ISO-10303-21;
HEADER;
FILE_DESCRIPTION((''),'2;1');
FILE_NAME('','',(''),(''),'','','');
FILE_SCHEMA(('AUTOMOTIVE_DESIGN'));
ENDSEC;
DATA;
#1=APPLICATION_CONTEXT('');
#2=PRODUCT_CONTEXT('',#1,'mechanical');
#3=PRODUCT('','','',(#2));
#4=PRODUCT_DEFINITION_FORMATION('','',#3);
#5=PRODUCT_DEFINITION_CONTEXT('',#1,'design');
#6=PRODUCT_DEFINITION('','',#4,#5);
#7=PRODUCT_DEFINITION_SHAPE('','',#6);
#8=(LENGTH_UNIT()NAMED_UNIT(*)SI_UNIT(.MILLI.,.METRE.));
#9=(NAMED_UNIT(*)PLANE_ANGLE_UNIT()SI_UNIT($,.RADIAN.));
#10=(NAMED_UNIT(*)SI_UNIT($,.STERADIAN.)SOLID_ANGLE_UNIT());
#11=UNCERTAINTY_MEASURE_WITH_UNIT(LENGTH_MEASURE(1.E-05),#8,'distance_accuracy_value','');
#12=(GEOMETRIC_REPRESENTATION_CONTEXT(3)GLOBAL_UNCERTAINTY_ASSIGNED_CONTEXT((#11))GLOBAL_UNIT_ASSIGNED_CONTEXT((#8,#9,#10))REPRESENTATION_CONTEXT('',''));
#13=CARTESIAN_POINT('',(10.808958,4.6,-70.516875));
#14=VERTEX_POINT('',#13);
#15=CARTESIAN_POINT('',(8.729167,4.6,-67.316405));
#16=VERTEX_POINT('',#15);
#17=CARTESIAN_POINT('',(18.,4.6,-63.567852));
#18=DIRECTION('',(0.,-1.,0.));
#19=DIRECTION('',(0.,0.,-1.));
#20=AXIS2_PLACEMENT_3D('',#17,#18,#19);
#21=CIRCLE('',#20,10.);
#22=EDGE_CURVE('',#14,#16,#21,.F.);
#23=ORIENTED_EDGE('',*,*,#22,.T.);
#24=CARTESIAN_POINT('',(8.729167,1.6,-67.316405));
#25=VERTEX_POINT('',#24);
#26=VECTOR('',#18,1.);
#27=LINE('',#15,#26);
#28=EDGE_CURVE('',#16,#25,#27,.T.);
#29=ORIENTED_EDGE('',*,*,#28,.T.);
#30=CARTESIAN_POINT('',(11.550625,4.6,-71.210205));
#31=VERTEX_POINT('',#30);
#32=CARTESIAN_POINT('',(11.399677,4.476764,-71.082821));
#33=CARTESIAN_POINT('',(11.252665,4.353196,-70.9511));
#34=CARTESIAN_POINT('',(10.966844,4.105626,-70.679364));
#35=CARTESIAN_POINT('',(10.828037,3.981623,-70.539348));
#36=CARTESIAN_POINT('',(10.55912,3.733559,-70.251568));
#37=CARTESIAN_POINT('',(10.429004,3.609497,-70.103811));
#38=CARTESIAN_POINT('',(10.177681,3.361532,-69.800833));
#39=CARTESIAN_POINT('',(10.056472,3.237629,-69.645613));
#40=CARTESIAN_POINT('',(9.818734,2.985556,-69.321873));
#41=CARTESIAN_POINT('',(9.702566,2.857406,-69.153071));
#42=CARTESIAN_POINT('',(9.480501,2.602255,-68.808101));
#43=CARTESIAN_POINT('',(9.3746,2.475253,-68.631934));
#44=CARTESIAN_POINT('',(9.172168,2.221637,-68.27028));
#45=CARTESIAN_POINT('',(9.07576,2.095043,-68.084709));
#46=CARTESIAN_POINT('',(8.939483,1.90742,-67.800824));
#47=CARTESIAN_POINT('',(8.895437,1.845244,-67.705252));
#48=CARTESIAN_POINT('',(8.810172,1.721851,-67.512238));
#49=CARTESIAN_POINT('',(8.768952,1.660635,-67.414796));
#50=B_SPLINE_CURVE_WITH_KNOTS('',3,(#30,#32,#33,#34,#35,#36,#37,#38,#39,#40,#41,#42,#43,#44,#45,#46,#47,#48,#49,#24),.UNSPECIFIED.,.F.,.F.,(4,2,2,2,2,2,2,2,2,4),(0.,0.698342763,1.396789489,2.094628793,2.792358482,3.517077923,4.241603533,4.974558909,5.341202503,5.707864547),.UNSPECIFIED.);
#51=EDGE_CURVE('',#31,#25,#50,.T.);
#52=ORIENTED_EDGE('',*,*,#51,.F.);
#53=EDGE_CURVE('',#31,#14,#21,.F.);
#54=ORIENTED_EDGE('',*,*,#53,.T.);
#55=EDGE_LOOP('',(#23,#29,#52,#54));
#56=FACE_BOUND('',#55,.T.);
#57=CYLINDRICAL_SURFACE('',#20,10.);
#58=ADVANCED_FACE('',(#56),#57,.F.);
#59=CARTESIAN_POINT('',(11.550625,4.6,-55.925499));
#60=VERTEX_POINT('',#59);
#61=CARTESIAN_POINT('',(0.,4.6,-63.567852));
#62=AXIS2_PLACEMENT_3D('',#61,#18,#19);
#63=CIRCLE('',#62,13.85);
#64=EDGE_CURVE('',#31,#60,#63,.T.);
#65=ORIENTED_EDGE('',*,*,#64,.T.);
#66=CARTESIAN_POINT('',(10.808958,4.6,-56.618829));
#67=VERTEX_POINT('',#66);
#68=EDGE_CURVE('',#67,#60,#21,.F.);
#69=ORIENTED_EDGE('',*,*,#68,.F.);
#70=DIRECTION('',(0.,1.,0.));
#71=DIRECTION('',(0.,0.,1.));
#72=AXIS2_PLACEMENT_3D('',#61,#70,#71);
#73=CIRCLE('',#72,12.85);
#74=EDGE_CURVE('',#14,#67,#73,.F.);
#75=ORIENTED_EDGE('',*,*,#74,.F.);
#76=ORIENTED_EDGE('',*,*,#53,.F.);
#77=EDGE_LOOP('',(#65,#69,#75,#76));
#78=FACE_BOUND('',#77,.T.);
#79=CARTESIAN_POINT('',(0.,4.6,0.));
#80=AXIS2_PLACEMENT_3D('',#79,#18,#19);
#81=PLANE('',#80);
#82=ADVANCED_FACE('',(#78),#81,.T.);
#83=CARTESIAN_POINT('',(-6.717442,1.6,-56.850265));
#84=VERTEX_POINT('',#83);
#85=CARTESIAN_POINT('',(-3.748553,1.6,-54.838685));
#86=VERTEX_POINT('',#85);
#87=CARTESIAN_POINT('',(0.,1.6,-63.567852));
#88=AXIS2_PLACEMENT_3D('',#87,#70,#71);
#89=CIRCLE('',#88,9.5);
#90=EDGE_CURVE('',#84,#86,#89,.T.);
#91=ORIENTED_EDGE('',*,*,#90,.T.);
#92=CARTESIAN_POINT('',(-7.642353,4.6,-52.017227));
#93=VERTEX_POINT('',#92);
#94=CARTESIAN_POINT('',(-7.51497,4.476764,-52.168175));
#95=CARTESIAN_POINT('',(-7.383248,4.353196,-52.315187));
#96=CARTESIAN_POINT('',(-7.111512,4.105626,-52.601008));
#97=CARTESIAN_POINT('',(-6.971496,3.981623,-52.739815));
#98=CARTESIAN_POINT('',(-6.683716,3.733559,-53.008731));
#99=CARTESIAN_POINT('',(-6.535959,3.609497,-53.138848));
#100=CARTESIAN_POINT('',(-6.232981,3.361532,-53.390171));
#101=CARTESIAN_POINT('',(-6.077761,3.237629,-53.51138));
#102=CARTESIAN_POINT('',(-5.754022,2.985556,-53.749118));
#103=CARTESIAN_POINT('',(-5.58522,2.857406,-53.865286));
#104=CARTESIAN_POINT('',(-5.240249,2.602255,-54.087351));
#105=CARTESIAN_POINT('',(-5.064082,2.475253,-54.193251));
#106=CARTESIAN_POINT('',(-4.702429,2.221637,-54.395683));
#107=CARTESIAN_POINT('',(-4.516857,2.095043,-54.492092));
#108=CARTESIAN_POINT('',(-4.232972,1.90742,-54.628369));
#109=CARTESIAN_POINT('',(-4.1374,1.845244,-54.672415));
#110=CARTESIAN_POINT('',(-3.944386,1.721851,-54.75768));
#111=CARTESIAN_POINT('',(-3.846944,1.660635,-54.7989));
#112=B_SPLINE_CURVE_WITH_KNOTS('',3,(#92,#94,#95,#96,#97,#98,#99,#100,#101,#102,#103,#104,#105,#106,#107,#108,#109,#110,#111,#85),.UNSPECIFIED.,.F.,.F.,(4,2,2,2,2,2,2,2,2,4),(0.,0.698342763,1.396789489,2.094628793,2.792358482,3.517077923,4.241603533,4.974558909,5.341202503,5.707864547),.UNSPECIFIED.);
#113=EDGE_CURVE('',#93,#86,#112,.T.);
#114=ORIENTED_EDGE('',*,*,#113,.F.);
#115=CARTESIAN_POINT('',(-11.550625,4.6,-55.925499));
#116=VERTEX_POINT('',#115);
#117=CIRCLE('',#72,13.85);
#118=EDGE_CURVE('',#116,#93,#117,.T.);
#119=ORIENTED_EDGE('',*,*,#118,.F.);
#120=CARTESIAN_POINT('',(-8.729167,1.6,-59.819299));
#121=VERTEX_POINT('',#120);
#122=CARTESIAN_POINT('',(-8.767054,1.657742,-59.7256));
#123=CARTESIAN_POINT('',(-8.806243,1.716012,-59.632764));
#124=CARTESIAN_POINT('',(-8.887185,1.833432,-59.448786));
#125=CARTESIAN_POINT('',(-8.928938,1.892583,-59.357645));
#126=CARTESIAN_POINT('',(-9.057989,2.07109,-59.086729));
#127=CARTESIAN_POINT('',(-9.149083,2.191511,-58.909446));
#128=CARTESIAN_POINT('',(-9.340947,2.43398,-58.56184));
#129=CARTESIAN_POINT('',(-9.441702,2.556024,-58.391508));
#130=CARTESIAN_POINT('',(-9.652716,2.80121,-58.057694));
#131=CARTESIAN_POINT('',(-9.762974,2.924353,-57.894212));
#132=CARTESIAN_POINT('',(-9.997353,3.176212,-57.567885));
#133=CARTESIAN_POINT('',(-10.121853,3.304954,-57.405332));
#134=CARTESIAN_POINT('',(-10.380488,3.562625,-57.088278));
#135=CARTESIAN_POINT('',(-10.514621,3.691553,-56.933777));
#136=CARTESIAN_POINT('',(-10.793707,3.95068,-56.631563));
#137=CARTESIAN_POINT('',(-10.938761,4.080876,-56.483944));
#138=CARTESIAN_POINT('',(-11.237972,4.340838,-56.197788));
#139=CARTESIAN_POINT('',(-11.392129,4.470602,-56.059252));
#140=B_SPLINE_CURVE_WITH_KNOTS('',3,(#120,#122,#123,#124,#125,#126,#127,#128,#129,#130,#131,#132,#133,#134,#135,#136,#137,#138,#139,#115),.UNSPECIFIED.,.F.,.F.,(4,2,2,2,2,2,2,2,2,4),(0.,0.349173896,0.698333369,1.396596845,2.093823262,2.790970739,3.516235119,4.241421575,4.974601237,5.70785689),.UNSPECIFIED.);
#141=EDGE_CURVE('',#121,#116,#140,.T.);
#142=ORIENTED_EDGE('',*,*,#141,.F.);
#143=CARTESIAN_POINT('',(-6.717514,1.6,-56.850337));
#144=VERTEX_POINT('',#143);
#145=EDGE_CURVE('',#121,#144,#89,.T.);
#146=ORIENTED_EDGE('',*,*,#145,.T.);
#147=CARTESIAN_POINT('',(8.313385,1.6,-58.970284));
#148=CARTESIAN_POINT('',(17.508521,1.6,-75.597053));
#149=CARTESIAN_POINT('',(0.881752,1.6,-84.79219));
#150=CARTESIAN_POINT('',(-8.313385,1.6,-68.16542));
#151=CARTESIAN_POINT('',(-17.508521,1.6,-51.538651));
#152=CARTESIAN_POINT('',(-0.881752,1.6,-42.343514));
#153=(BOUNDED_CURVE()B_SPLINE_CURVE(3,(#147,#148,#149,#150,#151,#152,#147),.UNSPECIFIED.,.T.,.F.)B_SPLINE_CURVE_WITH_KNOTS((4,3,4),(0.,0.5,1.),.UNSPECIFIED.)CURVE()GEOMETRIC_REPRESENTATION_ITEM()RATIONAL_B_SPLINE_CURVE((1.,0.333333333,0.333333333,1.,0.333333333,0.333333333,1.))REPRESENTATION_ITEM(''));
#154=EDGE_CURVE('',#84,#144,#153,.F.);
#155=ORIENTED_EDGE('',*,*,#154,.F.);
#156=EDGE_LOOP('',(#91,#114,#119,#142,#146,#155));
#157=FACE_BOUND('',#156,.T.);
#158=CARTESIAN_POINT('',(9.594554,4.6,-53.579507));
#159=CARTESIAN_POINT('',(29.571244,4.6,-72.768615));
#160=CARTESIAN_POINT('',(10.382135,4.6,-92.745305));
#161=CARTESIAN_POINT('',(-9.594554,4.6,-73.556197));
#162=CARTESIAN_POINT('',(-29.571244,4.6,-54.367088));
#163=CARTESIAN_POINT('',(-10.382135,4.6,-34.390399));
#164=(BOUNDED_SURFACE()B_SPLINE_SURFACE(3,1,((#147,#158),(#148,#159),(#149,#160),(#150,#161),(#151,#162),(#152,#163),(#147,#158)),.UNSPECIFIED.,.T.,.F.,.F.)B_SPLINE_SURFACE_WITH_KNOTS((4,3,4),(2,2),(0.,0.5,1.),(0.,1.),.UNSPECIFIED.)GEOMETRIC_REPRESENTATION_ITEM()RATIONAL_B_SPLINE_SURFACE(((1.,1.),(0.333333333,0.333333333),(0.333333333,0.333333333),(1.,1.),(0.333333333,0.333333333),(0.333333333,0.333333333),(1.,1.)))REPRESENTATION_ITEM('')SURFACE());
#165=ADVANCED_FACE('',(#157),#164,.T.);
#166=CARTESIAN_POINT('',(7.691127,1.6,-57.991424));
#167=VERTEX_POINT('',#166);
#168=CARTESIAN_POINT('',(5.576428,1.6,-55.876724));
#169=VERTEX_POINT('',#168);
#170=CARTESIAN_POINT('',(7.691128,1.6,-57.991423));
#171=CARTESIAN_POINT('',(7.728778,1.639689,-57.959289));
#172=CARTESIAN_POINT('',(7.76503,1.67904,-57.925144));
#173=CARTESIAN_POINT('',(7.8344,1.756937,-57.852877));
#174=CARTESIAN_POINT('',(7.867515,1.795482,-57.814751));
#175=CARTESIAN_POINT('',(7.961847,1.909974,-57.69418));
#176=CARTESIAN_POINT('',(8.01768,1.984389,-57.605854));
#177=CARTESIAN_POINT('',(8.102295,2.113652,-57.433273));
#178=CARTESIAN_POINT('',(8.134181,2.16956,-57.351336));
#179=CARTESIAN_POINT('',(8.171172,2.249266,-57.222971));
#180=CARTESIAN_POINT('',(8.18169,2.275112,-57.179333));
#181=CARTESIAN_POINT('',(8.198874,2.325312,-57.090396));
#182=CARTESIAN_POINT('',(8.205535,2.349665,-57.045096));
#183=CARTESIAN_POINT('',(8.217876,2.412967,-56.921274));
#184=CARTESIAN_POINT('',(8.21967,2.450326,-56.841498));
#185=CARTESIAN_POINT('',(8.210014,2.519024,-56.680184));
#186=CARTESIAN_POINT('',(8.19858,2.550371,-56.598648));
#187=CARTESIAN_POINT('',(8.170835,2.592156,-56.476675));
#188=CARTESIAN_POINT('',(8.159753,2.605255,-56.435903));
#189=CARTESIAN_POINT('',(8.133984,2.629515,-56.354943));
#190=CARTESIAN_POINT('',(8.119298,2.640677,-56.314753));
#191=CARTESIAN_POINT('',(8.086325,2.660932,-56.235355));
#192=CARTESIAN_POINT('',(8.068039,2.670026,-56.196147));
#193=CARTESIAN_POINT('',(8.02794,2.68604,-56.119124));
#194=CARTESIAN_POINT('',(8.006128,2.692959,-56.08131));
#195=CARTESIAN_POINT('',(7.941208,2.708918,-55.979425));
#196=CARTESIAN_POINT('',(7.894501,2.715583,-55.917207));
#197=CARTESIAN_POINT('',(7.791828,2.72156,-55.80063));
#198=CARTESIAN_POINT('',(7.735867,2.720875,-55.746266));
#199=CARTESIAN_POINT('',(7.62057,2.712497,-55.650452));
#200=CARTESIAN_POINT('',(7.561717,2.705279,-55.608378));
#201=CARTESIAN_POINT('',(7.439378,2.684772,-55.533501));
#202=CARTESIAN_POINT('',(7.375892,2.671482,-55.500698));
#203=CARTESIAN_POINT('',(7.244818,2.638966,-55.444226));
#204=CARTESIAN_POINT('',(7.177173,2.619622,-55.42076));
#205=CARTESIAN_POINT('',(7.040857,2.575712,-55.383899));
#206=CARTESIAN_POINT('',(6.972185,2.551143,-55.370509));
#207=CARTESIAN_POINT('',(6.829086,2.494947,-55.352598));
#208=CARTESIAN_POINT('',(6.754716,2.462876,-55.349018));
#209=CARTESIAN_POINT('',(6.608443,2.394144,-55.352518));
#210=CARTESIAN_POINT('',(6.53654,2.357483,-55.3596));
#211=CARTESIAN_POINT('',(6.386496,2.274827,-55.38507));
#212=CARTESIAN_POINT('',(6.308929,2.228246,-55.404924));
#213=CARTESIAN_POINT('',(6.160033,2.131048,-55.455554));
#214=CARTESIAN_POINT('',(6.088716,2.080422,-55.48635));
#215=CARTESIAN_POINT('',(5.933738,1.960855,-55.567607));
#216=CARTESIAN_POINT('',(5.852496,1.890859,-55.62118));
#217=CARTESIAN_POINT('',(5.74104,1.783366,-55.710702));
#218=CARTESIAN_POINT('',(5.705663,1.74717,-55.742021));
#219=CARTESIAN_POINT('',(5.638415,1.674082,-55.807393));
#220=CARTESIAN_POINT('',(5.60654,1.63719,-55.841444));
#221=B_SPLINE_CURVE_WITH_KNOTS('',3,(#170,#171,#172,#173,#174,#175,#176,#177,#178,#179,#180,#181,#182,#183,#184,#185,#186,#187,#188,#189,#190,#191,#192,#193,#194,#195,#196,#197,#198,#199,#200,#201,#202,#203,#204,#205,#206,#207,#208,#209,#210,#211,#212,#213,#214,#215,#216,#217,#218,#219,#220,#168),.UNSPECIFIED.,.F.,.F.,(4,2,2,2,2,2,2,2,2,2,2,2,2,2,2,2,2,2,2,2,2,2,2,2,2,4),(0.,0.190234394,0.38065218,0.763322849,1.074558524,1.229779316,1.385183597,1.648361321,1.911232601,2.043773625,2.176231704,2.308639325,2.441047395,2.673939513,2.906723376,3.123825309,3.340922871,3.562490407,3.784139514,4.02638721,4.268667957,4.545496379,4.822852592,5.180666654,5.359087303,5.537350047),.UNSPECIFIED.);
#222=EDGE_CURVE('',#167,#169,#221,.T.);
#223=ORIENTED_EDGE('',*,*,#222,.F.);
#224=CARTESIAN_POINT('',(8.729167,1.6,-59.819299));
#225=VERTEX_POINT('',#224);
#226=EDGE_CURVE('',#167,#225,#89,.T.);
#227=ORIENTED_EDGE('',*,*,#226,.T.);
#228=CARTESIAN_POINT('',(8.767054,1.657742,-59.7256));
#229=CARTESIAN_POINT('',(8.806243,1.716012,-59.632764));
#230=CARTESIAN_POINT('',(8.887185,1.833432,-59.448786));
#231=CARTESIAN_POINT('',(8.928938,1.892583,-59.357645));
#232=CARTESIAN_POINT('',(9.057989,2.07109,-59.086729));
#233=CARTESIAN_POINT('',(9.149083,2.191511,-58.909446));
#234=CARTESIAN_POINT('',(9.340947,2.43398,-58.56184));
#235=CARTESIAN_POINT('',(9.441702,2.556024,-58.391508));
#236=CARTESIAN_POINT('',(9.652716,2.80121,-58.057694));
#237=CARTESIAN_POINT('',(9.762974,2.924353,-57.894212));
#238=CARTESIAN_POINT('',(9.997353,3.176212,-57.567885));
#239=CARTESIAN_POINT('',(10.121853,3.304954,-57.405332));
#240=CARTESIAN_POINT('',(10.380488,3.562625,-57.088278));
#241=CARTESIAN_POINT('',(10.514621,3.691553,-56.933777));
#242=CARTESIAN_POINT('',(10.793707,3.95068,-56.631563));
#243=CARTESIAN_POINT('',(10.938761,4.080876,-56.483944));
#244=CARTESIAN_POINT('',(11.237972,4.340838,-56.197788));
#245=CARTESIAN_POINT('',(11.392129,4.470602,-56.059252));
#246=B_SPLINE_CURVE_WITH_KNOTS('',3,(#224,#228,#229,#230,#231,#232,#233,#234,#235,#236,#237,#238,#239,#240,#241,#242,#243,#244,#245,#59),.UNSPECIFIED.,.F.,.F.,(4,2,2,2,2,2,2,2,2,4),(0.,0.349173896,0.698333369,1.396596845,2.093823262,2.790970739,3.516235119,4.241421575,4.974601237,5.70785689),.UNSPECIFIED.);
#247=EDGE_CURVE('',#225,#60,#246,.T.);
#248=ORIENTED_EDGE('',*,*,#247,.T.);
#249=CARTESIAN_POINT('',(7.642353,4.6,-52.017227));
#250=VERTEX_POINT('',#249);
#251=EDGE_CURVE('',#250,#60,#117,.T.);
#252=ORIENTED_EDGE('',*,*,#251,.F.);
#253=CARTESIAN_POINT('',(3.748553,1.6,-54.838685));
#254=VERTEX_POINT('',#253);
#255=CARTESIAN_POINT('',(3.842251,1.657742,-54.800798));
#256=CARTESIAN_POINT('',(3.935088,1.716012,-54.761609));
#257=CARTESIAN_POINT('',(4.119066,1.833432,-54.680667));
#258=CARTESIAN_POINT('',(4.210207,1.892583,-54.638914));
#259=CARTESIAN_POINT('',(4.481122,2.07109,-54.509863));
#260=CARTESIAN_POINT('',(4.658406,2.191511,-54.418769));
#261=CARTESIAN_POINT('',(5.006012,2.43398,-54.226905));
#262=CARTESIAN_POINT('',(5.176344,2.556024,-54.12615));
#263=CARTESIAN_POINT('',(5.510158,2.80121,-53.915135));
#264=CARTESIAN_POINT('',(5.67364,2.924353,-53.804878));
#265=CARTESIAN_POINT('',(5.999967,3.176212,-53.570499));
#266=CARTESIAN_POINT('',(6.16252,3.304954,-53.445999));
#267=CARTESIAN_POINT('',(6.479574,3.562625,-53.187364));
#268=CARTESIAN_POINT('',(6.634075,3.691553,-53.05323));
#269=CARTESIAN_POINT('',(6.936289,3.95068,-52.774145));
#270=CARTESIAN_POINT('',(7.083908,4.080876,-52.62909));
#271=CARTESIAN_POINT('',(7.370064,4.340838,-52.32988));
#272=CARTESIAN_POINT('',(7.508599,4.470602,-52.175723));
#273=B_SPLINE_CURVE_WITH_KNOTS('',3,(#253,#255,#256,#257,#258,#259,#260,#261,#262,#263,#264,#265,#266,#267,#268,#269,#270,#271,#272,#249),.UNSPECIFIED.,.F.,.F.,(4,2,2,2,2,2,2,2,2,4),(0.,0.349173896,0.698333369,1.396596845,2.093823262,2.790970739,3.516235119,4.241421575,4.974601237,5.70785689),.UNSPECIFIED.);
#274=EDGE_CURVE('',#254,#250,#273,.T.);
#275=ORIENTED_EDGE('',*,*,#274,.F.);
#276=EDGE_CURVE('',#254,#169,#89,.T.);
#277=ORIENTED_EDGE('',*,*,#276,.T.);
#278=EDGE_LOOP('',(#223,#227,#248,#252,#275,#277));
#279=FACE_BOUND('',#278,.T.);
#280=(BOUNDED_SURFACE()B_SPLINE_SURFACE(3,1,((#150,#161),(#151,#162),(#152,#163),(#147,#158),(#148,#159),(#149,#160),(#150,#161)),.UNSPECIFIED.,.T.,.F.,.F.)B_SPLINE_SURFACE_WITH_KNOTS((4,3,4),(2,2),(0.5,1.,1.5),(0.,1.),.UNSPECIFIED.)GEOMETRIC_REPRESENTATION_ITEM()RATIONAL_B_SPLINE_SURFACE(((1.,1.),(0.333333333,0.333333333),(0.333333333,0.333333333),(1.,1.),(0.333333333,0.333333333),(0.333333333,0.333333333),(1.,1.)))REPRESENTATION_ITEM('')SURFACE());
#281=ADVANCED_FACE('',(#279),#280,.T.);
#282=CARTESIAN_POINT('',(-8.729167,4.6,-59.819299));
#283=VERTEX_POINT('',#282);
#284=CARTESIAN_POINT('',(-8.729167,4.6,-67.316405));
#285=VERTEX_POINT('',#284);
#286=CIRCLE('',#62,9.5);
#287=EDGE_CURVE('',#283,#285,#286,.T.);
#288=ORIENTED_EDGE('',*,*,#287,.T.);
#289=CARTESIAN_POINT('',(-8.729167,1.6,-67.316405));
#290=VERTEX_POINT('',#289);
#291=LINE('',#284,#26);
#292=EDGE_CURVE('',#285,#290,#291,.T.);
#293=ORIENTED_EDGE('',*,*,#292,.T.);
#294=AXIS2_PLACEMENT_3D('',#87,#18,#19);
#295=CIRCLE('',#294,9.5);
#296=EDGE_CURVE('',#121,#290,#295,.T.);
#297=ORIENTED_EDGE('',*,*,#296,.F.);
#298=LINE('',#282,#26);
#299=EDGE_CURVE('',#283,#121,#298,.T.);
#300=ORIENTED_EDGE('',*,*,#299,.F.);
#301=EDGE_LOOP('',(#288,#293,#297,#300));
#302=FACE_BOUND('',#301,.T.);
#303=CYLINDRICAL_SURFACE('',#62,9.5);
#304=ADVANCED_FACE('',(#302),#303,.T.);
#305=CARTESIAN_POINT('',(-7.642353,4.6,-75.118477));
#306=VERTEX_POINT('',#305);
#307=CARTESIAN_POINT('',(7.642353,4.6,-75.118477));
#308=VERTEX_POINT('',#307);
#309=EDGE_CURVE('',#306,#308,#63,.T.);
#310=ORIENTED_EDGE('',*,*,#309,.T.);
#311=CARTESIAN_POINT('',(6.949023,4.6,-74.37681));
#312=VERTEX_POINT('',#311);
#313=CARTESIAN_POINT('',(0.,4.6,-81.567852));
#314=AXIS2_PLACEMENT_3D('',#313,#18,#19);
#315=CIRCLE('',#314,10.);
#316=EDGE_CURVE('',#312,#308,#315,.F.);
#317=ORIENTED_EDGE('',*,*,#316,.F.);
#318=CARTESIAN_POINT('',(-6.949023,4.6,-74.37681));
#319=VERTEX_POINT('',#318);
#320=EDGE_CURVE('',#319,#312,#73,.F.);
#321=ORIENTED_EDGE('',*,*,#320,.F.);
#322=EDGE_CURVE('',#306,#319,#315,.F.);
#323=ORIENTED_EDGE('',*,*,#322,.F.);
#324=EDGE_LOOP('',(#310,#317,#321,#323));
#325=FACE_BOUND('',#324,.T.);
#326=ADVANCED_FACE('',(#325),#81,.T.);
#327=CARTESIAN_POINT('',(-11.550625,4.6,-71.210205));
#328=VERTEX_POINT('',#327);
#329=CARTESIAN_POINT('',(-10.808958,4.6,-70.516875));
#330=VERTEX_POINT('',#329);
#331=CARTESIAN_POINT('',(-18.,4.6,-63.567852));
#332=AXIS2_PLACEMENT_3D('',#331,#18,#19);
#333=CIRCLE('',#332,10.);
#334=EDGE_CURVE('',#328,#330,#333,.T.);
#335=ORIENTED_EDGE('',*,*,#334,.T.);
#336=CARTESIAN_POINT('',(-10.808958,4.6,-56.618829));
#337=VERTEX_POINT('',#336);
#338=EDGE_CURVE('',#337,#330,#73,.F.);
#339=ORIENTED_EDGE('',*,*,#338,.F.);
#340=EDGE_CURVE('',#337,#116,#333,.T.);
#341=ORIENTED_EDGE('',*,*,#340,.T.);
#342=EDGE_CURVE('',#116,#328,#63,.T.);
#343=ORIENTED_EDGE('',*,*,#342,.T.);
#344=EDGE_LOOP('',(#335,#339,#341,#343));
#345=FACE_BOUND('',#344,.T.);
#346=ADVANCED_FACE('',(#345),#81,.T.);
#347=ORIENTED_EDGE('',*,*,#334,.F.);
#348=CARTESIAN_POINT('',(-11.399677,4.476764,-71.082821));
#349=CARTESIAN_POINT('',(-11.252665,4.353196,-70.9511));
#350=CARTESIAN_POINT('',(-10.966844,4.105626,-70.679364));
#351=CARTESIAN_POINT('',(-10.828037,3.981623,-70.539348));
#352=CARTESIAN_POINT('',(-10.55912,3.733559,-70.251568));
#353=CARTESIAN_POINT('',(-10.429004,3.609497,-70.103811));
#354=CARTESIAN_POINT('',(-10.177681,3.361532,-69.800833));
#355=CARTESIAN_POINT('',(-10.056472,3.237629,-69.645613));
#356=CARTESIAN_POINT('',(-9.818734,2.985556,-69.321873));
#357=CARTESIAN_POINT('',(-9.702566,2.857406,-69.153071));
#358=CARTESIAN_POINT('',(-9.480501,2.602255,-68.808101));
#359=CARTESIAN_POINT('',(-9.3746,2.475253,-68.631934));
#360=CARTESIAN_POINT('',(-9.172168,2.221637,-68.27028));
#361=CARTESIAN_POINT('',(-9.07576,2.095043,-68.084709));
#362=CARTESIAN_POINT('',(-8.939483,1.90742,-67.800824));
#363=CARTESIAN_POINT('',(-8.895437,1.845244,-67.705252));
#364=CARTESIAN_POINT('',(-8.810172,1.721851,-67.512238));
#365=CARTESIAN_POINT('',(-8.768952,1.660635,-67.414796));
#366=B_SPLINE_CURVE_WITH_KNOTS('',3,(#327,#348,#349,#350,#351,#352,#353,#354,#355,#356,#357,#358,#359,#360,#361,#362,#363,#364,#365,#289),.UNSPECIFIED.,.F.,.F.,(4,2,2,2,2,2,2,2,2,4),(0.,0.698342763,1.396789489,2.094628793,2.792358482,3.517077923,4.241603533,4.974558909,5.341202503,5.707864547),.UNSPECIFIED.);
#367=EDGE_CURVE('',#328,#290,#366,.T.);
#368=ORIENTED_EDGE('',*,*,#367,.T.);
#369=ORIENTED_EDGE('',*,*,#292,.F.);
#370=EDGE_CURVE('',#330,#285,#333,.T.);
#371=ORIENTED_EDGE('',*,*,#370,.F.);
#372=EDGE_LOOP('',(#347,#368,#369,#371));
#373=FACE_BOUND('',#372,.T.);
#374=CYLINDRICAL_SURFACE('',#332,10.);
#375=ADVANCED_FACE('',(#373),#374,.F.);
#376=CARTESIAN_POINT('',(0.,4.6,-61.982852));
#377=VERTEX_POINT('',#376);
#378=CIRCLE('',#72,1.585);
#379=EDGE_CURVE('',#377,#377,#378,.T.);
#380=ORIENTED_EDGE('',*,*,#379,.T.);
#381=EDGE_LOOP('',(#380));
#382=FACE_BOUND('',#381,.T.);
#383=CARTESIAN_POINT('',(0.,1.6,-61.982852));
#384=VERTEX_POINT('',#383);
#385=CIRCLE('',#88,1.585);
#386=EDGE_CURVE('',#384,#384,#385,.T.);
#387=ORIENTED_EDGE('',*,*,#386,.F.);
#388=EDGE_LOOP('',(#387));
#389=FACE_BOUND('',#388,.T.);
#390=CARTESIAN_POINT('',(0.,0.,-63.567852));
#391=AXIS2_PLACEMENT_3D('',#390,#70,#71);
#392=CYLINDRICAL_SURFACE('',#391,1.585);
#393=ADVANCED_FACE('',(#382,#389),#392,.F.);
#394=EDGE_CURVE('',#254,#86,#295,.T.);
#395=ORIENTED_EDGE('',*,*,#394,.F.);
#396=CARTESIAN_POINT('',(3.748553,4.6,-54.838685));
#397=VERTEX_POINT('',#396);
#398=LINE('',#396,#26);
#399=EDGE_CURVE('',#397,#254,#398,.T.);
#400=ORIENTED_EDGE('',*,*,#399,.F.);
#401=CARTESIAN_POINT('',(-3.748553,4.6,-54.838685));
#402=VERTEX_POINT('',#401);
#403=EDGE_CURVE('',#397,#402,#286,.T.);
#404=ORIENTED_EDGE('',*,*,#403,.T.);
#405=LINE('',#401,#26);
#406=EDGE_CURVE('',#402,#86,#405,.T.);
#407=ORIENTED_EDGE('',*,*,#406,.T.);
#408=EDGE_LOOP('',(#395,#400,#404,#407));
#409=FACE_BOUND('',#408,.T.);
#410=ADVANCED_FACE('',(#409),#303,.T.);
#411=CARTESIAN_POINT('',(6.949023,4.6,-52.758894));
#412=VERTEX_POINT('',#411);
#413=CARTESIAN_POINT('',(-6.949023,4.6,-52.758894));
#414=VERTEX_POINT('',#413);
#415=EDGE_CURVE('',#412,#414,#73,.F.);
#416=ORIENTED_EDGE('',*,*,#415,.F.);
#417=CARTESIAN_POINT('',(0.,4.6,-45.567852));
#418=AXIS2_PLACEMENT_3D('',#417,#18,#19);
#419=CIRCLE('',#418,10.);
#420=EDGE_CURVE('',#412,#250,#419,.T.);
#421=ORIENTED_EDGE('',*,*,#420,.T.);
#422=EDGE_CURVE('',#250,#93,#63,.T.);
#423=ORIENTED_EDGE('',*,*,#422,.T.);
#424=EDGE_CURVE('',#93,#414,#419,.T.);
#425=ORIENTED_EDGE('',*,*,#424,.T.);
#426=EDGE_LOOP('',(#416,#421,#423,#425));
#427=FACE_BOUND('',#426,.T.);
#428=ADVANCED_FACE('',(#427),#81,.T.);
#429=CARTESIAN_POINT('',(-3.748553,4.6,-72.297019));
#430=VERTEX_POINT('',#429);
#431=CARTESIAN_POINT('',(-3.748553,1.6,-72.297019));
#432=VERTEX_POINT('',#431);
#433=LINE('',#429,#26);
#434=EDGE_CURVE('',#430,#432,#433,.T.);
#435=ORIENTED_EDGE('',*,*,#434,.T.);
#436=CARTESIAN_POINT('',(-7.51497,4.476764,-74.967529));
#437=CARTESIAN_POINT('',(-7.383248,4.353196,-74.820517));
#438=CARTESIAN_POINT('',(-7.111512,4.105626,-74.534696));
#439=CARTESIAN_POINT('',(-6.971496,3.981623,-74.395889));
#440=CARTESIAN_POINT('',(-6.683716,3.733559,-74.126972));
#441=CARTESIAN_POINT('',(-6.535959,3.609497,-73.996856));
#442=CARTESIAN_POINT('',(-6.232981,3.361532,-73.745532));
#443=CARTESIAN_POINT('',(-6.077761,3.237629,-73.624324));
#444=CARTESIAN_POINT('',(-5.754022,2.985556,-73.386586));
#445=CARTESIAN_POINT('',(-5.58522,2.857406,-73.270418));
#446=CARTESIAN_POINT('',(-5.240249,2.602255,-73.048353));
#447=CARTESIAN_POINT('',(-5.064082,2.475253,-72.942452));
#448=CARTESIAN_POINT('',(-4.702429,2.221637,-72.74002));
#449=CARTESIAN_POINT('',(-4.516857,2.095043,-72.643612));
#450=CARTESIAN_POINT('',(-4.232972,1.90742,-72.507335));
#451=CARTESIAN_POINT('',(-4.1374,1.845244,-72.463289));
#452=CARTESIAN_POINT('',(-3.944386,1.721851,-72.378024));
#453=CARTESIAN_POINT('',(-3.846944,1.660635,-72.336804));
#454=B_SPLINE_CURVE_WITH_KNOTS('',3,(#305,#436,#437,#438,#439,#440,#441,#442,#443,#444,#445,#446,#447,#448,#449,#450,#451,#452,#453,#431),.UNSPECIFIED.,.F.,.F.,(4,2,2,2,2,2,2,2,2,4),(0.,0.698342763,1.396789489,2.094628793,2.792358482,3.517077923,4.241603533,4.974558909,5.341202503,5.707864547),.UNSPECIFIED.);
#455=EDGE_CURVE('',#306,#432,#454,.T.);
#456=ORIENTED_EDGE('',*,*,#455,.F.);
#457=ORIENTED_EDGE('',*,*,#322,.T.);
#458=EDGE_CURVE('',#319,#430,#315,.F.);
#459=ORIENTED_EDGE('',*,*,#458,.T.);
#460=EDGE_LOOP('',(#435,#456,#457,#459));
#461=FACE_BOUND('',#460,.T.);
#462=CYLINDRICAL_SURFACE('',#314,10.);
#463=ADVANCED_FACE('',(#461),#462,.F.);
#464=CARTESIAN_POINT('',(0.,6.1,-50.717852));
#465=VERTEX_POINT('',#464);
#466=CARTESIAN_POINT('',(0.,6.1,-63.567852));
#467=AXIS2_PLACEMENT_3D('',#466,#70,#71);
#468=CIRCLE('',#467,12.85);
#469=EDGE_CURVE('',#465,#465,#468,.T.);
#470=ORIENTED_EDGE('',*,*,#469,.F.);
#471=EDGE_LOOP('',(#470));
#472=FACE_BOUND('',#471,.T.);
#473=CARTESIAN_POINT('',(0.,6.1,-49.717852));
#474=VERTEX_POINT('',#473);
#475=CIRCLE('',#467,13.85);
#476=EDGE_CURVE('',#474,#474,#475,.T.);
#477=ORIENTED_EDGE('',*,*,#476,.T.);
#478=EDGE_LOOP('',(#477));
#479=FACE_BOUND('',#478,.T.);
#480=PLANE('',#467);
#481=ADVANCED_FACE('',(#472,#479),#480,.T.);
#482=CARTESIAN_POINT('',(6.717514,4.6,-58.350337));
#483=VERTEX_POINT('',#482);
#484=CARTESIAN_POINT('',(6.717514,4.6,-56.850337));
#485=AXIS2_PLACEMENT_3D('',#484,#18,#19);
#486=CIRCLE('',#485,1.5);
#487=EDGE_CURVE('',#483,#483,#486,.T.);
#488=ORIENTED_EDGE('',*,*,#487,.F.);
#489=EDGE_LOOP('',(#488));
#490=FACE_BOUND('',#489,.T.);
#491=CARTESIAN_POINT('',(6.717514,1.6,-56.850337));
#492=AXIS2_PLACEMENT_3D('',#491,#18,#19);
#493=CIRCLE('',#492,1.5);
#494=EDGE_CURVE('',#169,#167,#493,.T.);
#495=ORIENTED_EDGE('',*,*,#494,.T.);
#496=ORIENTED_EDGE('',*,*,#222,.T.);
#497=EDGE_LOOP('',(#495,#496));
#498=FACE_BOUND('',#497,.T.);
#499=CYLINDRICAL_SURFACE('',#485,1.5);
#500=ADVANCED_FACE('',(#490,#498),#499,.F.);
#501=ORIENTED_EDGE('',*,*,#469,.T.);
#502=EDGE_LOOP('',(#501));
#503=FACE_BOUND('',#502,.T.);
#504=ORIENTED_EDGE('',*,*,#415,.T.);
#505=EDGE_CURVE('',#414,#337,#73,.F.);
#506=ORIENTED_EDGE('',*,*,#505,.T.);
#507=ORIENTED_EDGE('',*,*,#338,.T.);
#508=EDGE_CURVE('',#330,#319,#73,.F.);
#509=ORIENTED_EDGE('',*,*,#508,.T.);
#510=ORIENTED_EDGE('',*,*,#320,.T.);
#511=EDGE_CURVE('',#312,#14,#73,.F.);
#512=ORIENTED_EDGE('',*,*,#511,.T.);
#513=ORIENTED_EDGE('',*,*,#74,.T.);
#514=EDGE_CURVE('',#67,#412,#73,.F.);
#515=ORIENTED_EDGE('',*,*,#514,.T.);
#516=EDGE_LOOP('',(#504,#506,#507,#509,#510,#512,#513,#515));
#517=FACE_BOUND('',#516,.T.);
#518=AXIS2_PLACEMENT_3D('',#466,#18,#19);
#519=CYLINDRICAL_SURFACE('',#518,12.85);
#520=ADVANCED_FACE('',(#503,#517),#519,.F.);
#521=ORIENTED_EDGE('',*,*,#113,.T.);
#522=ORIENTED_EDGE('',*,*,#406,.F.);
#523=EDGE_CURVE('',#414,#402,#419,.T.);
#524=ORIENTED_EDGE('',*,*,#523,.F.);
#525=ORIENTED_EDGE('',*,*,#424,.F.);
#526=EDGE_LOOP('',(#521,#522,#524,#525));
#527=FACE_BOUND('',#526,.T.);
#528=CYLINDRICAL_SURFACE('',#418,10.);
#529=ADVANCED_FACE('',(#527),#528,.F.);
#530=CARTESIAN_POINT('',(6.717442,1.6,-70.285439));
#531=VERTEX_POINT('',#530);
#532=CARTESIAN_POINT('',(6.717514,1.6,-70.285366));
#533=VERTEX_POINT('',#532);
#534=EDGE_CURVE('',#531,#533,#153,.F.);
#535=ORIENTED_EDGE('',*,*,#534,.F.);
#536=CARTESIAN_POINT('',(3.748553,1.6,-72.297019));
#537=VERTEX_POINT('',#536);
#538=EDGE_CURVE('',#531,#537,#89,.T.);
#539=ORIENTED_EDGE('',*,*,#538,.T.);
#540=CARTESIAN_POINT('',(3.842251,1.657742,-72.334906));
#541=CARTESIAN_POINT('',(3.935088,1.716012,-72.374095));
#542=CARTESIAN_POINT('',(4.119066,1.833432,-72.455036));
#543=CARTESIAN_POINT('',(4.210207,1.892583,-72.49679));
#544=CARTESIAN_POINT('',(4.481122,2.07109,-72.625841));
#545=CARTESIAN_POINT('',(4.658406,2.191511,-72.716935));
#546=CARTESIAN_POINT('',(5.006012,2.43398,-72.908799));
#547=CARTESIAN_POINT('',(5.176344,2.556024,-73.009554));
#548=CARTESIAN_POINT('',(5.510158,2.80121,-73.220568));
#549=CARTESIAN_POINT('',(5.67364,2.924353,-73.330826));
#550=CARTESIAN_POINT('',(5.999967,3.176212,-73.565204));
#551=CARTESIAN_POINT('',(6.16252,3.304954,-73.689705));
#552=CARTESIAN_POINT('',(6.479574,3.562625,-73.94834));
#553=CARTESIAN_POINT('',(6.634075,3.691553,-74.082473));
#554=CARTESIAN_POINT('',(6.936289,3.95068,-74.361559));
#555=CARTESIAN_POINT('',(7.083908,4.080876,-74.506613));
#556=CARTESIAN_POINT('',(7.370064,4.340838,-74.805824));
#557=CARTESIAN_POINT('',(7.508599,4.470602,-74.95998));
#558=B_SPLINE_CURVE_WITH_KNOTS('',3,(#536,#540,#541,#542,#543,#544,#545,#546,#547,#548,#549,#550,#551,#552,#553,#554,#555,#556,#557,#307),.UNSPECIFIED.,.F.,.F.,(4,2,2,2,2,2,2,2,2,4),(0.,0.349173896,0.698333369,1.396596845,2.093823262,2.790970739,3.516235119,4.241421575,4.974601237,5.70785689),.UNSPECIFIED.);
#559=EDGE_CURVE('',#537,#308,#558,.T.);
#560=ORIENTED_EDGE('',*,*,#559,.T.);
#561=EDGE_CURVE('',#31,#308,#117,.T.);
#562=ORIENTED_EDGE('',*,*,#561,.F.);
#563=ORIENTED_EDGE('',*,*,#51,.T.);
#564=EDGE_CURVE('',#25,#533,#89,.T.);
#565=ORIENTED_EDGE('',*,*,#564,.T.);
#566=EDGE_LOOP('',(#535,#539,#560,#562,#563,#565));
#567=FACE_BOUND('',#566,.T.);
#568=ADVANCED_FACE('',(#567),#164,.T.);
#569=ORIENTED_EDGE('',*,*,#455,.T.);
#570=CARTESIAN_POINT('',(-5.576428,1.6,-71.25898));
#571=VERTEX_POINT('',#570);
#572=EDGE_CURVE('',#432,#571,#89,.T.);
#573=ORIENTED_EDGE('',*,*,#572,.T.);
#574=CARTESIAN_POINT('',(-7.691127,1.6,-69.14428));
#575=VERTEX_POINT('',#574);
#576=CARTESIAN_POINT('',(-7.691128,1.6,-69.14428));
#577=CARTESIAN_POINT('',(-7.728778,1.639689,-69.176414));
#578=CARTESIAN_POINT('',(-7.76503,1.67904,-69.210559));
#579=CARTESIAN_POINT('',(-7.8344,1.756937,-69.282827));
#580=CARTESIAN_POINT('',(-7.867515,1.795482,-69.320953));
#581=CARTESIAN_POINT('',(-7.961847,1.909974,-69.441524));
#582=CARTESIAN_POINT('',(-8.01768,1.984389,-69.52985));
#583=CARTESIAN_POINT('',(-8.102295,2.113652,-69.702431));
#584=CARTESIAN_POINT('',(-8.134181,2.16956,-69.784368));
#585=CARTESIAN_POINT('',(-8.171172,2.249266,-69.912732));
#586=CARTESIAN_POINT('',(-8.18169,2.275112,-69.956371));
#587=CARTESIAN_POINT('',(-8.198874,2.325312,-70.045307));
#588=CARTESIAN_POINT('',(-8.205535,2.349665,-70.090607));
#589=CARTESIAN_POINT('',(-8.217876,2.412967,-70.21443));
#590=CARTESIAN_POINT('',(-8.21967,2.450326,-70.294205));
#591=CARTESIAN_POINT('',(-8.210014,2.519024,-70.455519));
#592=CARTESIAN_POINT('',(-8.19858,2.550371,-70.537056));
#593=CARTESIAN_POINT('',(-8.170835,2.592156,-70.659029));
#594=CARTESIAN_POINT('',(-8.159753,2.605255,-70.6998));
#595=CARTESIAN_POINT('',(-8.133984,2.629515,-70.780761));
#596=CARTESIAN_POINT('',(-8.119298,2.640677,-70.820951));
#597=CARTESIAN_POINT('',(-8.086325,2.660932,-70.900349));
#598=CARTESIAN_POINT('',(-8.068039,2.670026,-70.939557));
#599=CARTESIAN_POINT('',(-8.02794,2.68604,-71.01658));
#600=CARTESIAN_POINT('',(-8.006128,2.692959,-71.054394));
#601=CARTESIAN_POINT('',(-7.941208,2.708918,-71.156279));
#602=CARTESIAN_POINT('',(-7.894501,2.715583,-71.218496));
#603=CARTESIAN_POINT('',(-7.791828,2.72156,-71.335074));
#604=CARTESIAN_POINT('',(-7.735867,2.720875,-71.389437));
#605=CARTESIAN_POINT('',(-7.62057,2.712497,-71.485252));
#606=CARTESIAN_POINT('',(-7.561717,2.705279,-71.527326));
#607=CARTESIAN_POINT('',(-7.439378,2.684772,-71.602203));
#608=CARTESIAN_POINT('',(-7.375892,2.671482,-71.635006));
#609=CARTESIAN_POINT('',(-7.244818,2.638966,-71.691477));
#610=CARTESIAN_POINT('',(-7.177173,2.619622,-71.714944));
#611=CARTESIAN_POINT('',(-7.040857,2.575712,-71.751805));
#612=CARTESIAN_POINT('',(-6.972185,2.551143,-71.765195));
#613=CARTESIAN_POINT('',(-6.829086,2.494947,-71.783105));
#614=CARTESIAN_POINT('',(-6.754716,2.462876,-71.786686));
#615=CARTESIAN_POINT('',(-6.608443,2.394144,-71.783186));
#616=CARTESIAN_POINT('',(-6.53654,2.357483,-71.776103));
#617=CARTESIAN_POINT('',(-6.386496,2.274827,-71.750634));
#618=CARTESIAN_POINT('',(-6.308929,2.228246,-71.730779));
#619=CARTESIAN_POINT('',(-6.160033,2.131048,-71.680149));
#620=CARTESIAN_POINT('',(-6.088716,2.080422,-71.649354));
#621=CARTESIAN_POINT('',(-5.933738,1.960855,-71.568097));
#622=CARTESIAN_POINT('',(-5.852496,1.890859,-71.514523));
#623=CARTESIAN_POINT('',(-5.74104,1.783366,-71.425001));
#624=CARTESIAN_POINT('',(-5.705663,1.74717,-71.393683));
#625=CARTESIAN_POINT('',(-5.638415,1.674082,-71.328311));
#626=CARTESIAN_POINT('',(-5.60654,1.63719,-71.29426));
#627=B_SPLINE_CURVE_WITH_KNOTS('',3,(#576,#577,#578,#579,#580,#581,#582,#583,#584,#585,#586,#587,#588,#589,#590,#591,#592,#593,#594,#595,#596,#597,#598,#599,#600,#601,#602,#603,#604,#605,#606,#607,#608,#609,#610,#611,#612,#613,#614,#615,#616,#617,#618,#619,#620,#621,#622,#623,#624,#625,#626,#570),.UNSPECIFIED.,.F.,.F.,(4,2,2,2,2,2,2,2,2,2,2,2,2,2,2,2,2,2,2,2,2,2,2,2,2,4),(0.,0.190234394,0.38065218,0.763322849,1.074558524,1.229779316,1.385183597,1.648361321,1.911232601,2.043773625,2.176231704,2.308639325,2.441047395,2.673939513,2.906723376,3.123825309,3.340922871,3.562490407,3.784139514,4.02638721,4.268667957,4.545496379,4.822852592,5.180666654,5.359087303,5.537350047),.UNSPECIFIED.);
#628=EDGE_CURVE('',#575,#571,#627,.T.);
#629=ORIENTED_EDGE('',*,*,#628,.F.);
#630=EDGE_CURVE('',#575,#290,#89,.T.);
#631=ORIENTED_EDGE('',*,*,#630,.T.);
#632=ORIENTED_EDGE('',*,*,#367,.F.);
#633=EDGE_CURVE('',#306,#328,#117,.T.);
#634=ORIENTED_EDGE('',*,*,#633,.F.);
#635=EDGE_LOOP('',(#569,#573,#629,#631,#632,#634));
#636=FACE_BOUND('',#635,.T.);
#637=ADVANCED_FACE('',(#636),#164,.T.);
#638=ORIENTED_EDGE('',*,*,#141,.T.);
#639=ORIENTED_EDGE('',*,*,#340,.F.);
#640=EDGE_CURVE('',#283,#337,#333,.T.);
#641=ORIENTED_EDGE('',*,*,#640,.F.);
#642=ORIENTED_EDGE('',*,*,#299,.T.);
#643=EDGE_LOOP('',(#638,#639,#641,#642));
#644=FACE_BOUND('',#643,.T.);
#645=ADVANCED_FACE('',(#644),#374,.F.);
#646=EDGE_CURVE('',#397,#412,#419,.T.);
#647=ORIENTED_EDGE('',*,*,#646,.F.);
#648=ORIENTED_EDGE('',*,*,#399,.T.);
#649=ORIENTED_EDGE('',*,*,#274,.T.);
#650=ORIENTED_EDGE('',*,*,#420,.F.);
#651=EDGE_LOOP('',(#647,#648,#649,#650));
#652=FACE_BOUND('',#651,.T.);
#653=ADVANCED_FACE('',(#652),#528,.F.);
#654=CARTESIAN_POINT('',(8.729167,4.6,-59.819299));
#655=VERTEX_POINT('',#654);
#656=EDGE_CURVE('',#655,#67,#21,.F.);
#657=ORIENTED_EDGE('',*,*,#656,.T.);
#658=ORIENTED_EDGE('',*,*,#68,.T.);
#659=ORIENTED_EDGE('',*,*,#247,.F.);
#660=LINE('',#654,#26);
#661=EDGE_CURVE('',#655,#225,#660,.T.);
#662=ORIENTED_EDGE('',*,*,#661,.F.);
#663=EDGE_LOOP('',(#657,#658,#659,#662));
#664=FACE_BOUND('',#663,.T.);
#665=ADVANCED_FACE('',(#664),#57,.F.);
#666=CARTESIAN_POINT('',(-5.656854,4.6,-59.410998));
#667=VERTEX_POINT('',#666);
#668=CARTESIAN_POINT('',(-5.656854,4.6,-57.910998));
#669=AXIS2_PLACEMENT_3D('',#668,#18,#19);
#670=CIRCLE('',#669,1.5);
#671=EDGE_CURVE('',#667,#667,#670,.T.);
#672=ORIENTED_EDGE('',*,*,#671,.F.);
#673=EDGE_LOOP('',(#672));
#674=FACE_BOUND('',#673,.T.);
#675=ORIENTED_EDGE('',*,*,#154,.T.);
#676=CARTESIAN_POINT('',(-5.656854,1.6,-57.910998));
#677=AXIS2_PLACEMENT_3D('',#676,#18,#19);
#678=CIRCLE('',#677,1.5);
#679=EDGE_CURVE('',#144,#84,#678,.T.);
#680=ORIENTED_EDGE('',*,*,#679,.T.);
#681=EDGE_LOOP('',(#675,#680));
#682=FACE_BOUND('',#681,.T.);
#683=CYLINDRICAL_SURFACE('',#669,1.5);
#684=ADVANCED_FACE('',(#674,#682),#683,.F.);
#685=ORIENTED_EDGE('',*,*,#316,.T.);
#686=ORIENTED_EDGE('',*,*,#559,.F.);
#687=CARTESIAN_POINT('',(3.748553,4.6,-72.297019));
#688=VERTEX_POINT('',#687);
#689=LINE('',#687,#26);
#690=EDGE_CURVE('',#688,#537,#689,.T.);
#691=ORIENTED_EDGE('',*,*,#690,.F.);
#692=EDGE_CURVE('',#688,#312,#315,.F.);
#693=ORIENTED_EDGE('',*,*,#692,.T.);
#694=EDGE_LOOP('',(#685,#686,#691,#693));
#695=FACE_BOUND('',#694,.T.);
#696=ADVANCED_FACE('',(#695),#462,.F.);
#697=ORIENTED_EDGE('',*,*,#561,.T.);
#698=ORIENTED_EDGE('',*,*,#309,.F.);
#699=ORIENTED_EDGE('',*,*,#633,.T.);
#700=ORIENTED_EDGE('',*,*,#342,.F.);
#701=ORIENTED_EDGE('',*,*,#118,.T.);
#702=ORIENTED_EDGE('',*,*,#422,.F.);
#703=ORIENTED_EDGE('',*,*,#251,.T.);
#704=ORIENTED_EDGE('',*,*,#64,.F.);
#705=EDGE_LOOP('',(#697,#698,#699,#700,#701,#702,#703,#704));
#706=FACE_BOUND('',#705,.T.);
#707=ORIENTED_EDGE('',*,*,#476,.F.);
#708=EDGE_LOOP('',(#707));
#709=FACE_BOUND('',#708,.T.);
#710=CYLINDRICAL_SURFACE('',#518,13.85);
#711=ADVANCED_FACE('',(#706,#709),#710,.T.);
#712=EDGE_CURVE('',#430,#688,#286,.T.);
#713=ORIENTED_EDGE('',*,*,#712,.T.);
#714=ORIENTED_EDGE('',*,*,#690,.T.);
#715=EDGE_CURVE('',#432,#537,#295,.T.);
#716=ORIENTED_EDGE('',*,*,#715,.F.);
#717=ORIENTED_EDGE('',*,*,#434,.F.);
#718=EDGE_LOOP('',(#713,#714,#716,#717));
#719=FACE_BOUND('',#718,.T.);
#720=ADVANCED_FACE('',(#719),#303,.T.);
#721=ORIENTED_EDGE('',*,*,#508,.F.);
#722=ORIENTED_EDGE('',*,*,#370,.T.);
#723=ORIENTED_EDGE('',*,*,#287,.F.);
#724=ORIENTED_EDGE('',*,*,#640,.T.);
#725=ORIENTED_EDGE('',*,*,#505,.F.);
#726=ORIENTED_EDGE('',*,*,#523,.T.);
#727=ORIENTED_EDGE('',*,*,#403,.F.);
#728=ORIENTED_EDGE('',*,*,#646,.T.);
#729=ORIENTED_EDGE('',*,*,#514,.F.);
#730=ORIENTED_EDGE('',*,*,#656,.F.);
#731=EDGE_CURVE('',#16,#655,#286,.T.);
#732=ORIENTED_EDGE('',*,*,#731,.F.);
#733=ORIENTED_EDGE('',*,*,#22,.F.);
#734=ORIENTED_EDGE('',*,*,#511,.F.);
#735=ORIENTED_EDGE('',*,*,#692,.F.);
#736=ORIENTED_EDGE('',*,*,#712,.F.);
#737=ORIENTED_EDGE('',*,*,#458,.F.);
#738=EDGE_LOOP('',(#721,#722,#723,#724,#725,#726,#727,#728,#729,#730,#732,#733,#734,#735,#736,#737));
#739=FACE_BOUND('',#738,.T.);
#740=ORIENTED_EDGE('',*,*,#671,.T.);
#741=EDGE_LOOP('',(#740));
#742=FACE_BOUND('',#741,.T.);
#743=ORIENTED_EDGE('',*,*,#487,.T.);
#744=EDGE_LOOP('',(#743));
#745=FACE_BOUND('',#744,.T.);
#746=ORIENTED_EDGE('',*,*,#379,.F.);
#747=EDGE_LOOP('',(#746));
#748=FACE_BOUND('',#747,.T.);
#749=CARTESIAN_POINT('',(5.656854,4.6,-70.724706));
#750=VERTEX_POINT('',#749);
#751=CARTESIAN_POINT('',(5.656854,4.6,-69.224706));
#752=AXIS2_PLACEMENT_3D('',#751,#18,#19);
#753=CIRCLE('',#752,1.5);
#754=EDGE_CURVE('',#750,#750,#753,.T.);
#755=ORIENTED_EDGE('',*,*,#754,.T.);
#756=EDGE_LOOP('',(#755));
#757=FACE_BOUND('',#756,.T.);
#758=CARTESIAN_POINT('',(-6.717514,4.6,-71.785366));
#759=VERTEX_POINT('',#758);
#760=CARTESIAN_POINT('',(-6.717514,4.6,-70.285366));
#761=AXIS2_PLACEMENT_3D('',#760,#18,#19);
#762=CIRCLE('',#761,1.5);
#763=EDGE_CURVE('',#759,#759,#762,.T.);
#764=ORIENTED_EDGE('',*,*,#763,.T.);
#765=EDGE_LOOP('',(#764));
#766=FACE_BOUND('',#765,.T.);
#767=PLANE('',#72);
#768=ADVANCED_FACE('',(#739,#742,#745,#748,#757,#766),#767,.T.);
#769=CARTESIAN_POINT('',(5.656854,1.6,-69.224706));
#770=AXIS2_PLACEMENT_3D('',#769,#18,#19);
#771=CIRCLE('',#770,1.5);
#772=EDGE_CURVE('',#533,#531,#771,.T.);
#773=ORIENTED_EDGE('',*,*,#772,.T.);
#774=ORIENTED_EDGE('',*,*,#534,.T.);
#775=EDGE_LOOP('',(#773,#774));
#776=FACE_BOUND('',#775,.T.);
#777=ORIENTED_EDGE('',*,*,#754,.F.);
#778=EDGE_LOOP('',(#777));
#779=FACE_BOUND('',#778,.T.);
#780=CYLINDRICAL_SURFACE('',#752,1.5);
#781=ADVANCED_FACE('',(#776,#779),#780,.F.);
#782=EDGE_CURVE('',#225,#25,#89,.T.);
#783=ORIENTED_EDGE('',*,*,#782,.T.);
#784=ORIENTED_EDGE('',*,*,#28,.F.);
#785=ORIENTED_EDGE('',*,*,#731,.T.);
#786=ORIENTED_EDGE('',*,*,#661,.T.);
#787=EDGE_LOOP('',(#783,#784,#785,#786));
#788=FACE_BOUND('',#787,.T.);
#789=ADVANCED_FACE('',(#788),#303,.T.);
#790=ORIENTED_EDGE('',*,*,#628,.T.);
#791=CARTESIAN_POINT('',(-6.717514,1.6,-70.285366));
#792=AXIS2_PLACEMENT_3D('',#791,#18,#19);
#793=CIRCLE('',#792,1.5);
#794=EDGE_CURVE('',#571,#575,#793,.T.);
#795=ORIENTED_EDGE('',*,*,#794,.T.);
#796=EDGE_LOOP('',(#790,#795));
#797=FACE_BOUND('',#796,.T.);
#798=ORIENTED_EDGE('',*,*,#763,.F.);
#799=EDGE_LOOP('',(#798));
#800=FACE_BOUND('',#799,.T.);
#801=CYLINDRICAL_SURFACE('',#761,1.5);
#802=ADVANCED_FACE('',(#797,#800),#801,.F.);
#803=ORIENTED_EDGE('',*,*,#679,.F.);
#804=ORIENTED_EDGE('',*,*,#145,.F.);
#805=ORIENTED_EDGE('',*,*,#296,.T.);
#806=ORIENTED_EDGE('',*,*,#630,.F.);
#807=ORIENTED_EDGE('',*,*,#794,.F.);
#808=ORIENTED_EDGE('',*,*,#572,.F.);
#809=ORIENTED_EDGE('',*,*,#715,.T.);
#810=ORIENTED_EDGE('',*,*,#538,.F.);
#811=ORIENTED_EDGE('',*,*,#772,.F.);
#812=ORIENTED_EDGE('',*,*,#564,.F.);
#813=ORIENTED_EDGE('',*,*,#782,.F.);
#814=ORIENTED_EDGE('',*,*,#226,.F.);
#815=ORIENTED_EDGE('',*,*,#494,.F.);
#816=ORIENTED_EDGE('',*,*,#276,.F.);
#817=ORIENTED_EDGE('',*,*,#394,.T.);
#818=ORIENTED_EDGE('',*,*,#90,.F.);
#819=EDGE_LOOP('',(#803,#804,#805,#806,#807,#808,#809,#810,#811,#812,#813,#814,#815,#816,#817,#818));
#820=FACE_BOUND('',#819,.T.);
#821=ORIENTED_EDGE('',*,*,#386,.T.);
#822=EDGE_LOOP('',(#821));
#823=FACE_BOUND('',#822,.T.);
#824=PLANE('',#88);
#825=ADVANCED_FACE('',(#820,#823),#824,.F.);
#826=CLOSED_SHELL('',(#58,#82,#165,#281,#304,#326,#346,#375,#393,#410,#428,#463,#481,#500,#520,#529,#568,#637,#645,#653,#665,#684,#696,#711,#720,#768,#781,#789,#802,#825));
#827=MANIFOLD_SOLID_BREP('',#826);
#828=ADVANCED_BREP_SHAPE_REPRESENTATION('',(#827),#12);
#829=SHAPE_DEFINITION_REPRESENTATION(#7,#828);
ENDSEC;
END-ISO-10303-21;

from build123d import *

# Parameters (mm, degrees)
SKETCH6_R           = 1.585
BOSS_EXTRUDE2_DEPTH = 40
SKETCH9_R           = 13.85
SKETCH9_R_2         = 12.85
BOSS_EXTRUDE3_DEPTH = 1.5
SKETCH13_R          = 1.5
CUT_EXTRUDE2_DEPTH  = 3
CUT_EXTRUDE3_START  = -40
SKETCH15_R          = 1.585
CUT_EXTRUDE3_DEPTH  = 40


with BuildPart() as part:
    # Sketch6 → Boss-Extrude2 (new body)
    with BuildSketch(Plane(origin=(0, 0, 0), x_dir=(1, 0, 0), z_dir=(0, 1, 0))):
        with Locations(Location((0, 63.567851845, 0), (0, 0, 270))):
            Circle(SKETCH6_R)
    extrude(amount=BOSS_EXTRUDE2_DEPTH)

    # Loft3: read off the stored shape, not the designer's step
    # Loft3: loft between two sections, ruled curve by curve
    loft3_from = [
        Edge.make_bspline([(8.313384779, 1.6, -58.970283628), (17.508521214, 1.6, -75.597053186), (0.881751655, 1.6, -84.792189621), (-8.313384779, 1.6, -68.165420062), (-17.508521214, 1.6, -51.538650504), (-0.881751655, 1.6, -42.343514069), (8.313384779, 1.6, -58.970283628)], [0, 0, 0, 0, 0.5, 0.5, 0.5, 1, 1, 1, 1], 3, [1, 0.333333333, 0.333333333, 1, 0.333333333, 0.333333333, 1]),
    ]
    loft3_to = [
        Edge.make_bspline([(9.59455414, 4.6, -53.579507095), (29.571243641, 4.6, -72.768615375), (10.38213536, 4.6, -92.745304876), (-9.59455414, 4.6, -73.556196595), (-29.571243641, 4.6, -54.367088315), (-10.38213536, 4.6, -34.390398814), (9.59455414, 4.6, -53.579507095)], [0, 0, 0, 0, 0.5, 0.5, 0.5, 1, 1, 1, 1], 3, [1, 0.333333333, 0.333333333, 1, 0.333333333, 0.333333333, 1]),
    ]
    loft3 = Solid(Shell([*[Face.make_surface_from_curves(loft3_from[k], loft3_to[k]) for k in range(1)], Face(Wire(loft3_from)), Face(Wire(loft3_to))]))
    add(loft3)

    # Sketch9 → Boss-Extrude3 (add)
    with BuildSketch(Plane(origin=(0, 4.6, 0), x_dir=(1, 0, 0), z_dir=(0, 1, 0))):
        with Locations(Location((0, 63.567851845, 0), (0, 0, 313.848))):
            Circle(SKETCH9_R)
        with Locations(Location((0, 63.567851845, 0), (0, 0, 270))):
            Circle(SKETCH9_R_2, mode=Mode.SUBTRACT)
    extrude(amount=BOSS_EXTRUDE3_DEPTH)

    # Sketch13 → Cut-Extrude2 (cut)
    with BuildSketch(Plane.XZ.offset(-1.6)):
        with BuildLine():
            ThreePointArc((3.748552961, -54.838685178), (5.867566996, -53.665484681), (7.642353179, -52.017226845))
            ThreePointArc((7.642353179, -52.017226845), (0, -49.717851845), (-7.642353179, -52.017226845))
            ThreePointArc((-7.642353179, -52.017226845), (-5.867566996, -53.665484681), (-3.748552962, -54.838685178))
            add(Edge.make_bspline(
                [(-3.748552962, -54.838685178), (-1.231569039, -53.757820544), (1.413224787, -53.8358287), (3.748552961, -54.838685178)],
                knots=[0.762454345, 0.762454345, 0.762454345, 0.762454345, 0.872430629, 0.872430629, 0.872430629, 0.872430629], degree=3, weights=[0.501240886, 0.508545859, 0.548103588, 0.619914072]))
        make_face()
        with BuildLine():
            ThreePointArc((-8.729166667, -59.819298884), (-9.902367164, -57.700284849), (-11.550625, -55.925498666))
            ThreePointArc((-11.550625, -55.925498666), (-13.85, -63.567851845), (-11.550625, -71.210205024))
            ThreePointArc((-11.550625, -71.210205024), (-9.902367164, -69.435418841), (-8.729166666, -67.316404806))
            add(Edge.make_bspline(
                [(-8.729166666, -67.316404806), (-9.679235061, -65.104002995), (-9.857654527, -62.447181888), (-8.729166667, -59.819298884)],
                knots=[0.523726688, 0.523726688, 0.523726688, 0.523726688, 0.664367025, 0.664367025, 0.664367025, 0.664367025], degree=3, weights=[0.909596892, 0.739873401, 0.622895787, 0.558664051]))
        make_face()
        with BuildLine():
            ThreePointArc((11.550625, -71.210205024), (13.262704405, -67.558236773), (13.85, -63.567851845))
            ThreePointArc((13.85, -63.567851845), (13.262704405, -59.577466917), (11.550625, -55.925498666))
            ThreePointArc((11.550625, -55.925498666), (9.902367164, -57.700284849), (8.729166667, -59.819298884))
            add(Edge.make_bspline(
                [(8.729166667, -59.819298884), (9.679235061, -62.031700695), (9.857654527, -64.688521802), (8.729166667, -67.316404807)],
                knots=[0.023726688, 0.023726688, 0.023726688, 0.023726688, 0.164367025, 0.164367025, 0.164367025, 0.164367025], degree=3, weights=[0.909596892, 0.739873401, 0.622895787, 0.558664051]))
            ThreePointArc((8.729166667, -67.316404807), (9.902367164, -69.435418841), (11.550625, -71.210205024))
        make_face()
        with BuildLine():
            ThreePointArc((-7.642353179, -75.118476845), (0, -77.417851845), (7.642353179, -75.118476845))
            ThreePointArc((7.642353179, -75.118476845), (5.867566996, -73.470219009), (3.748552961, -72.297018512))
            add(Edge.make_bspline(
                [(3.748552961, -72.297018512), (1.231569039, -73.377883146), (-1.413224786, -73.29987499), (-3.748552961, -72.297018512)],
                knots=[0.262454345, 0.262454345, 0.262454345, 0.262454345, 0.372430629, 0.372430629, 0.372430629, 0.372430629], degree=3, weights=[0.501240886, 0.508545859, 0.548103588, 0.619914071]))
            ThreePointArc((-3.748552961, -72.297018512), (-5.867566996, -73.470219009), (-7.642353179, -75.118476845))
        make_face()
        with Locations(Location((-5.656854249, -57.910997596, 0), (0, 0, 270))):
            Circle(SKETCH13_R)
        with Locations(Location((6.717514421, -56.850337424, 0), (0, 0, 270))):
            Circle(SKETCH13_R)
        with Locations(Location((5.656854249, -69.224706095, 0), (0, 0, 270))):
            Circle(SKETCH13_R)
        with Locations(Location((-6.717514421, -70.285366266, 0), (0, 0, 270))):
            Circle(SKETCH13_R)
    extrude(amount=-CUT_EXTRUDE2_DEPTH, mode=Mode.SUBTRACT)

    # Sketch15 → Cut-Extrude3 (cut)
    with BuildSketch(Plane(origin=(0, 40, 0), x_dir=(1, 0, 0), z_dir=(0, 1, 0)).offset(CUT_EXTRUDE3_START)):
        with Locations(Location((0, 63.567851845, 0), (0, 0, 270))):
            Circle(SKETCH15_R)
    extrude(amount=CUT_EXTRUDE3_DEPTH, mode=Mode.SUBTRACT)


solid = part.part
